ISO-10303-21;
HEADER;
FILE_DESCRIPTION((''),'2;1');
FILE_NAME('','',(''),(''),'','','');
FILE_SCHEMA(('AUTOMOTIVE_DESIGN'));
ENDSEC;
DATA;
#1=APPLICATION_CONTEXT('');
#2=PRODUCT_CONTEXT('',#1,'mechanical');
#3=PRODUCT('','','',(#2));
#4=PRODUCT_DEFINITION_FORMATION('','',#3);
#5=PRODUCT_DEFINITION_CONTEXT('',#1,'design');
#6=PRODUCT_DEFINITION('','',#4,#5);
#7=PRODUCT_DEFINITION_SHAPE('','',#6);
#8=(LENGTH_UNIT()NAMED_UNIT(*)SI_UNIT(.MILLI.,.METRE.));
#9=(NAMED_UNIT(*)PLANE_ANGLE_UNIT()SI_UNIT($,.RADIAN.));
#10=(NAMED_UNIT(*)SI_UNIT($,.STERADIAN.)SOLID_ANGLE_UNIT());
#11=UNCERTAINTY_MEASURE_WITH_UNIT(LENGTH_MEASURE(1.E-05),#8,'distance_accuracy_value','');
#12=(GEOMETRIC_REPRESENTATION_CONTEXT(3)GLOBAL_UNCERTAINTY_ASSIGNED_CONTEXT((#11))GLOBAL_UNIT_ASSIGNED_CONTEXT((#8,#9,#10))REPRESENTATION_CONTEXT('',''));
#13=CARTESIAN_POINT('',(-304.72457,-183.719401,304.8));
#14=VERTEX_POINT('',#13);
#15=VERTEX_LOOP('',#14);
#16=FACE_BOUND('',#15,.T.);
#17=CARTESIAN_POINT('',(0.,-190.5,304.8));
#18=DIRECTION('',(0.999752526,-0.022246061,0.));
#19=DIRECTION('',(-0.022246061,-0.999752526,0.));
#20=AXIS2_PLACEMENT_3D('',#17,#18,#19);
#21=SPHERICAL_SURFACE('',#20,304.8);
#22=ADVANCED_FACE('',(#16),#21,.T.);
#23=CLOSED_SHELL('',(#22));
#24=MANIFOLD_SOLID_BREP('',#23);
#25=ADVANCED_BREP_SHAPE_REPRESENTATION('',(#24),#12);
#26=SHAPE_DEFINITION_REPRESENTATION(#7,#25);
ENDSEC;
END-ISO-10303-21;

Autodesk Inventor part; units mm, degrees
ref_plane "YZ Plane" through (0, 0, 0) normal (1, 0, 0) x (0, 1, 0)
ref_plane "XZ Plane" through (0, 0, 0) normal (0, 1, 0) x (-1, 0, 0)
ref_plane "XY Plane" through (0, 0, 0) normal (0, 0, 1) x (1, 0, 0)
ref_plane "Work Plane1" through (0, 0, 304.8) normal (0, 0, 1) x (1, 0, 0)
sketch "Sketch1" plane through (0, 0, 304.8) normal (0, 0, 1) x (1, 0, 0)
  line L0 (0, 0) -> (0, 114.3)
  line L1 (0, 114.3) -> (0, -190.5)
  circle A0 centre (0, -190.5) radius 304.8
  line L2 (-304.7246, -183.7194) -> (304.7246, -197.2806)
  dimension "d0" = 114.3
  dimension "d1" = 304.8
  dimension "d2" = 0
  dimension "d3" = 609.6
revolve "Revolution1" add sketch "Sketch1" angle 360 about axis through (-304.7246, -183.7194, 304.8) along (0.9997525, -0.022246, 0) contours L2 A0
properties part number "Ball"
